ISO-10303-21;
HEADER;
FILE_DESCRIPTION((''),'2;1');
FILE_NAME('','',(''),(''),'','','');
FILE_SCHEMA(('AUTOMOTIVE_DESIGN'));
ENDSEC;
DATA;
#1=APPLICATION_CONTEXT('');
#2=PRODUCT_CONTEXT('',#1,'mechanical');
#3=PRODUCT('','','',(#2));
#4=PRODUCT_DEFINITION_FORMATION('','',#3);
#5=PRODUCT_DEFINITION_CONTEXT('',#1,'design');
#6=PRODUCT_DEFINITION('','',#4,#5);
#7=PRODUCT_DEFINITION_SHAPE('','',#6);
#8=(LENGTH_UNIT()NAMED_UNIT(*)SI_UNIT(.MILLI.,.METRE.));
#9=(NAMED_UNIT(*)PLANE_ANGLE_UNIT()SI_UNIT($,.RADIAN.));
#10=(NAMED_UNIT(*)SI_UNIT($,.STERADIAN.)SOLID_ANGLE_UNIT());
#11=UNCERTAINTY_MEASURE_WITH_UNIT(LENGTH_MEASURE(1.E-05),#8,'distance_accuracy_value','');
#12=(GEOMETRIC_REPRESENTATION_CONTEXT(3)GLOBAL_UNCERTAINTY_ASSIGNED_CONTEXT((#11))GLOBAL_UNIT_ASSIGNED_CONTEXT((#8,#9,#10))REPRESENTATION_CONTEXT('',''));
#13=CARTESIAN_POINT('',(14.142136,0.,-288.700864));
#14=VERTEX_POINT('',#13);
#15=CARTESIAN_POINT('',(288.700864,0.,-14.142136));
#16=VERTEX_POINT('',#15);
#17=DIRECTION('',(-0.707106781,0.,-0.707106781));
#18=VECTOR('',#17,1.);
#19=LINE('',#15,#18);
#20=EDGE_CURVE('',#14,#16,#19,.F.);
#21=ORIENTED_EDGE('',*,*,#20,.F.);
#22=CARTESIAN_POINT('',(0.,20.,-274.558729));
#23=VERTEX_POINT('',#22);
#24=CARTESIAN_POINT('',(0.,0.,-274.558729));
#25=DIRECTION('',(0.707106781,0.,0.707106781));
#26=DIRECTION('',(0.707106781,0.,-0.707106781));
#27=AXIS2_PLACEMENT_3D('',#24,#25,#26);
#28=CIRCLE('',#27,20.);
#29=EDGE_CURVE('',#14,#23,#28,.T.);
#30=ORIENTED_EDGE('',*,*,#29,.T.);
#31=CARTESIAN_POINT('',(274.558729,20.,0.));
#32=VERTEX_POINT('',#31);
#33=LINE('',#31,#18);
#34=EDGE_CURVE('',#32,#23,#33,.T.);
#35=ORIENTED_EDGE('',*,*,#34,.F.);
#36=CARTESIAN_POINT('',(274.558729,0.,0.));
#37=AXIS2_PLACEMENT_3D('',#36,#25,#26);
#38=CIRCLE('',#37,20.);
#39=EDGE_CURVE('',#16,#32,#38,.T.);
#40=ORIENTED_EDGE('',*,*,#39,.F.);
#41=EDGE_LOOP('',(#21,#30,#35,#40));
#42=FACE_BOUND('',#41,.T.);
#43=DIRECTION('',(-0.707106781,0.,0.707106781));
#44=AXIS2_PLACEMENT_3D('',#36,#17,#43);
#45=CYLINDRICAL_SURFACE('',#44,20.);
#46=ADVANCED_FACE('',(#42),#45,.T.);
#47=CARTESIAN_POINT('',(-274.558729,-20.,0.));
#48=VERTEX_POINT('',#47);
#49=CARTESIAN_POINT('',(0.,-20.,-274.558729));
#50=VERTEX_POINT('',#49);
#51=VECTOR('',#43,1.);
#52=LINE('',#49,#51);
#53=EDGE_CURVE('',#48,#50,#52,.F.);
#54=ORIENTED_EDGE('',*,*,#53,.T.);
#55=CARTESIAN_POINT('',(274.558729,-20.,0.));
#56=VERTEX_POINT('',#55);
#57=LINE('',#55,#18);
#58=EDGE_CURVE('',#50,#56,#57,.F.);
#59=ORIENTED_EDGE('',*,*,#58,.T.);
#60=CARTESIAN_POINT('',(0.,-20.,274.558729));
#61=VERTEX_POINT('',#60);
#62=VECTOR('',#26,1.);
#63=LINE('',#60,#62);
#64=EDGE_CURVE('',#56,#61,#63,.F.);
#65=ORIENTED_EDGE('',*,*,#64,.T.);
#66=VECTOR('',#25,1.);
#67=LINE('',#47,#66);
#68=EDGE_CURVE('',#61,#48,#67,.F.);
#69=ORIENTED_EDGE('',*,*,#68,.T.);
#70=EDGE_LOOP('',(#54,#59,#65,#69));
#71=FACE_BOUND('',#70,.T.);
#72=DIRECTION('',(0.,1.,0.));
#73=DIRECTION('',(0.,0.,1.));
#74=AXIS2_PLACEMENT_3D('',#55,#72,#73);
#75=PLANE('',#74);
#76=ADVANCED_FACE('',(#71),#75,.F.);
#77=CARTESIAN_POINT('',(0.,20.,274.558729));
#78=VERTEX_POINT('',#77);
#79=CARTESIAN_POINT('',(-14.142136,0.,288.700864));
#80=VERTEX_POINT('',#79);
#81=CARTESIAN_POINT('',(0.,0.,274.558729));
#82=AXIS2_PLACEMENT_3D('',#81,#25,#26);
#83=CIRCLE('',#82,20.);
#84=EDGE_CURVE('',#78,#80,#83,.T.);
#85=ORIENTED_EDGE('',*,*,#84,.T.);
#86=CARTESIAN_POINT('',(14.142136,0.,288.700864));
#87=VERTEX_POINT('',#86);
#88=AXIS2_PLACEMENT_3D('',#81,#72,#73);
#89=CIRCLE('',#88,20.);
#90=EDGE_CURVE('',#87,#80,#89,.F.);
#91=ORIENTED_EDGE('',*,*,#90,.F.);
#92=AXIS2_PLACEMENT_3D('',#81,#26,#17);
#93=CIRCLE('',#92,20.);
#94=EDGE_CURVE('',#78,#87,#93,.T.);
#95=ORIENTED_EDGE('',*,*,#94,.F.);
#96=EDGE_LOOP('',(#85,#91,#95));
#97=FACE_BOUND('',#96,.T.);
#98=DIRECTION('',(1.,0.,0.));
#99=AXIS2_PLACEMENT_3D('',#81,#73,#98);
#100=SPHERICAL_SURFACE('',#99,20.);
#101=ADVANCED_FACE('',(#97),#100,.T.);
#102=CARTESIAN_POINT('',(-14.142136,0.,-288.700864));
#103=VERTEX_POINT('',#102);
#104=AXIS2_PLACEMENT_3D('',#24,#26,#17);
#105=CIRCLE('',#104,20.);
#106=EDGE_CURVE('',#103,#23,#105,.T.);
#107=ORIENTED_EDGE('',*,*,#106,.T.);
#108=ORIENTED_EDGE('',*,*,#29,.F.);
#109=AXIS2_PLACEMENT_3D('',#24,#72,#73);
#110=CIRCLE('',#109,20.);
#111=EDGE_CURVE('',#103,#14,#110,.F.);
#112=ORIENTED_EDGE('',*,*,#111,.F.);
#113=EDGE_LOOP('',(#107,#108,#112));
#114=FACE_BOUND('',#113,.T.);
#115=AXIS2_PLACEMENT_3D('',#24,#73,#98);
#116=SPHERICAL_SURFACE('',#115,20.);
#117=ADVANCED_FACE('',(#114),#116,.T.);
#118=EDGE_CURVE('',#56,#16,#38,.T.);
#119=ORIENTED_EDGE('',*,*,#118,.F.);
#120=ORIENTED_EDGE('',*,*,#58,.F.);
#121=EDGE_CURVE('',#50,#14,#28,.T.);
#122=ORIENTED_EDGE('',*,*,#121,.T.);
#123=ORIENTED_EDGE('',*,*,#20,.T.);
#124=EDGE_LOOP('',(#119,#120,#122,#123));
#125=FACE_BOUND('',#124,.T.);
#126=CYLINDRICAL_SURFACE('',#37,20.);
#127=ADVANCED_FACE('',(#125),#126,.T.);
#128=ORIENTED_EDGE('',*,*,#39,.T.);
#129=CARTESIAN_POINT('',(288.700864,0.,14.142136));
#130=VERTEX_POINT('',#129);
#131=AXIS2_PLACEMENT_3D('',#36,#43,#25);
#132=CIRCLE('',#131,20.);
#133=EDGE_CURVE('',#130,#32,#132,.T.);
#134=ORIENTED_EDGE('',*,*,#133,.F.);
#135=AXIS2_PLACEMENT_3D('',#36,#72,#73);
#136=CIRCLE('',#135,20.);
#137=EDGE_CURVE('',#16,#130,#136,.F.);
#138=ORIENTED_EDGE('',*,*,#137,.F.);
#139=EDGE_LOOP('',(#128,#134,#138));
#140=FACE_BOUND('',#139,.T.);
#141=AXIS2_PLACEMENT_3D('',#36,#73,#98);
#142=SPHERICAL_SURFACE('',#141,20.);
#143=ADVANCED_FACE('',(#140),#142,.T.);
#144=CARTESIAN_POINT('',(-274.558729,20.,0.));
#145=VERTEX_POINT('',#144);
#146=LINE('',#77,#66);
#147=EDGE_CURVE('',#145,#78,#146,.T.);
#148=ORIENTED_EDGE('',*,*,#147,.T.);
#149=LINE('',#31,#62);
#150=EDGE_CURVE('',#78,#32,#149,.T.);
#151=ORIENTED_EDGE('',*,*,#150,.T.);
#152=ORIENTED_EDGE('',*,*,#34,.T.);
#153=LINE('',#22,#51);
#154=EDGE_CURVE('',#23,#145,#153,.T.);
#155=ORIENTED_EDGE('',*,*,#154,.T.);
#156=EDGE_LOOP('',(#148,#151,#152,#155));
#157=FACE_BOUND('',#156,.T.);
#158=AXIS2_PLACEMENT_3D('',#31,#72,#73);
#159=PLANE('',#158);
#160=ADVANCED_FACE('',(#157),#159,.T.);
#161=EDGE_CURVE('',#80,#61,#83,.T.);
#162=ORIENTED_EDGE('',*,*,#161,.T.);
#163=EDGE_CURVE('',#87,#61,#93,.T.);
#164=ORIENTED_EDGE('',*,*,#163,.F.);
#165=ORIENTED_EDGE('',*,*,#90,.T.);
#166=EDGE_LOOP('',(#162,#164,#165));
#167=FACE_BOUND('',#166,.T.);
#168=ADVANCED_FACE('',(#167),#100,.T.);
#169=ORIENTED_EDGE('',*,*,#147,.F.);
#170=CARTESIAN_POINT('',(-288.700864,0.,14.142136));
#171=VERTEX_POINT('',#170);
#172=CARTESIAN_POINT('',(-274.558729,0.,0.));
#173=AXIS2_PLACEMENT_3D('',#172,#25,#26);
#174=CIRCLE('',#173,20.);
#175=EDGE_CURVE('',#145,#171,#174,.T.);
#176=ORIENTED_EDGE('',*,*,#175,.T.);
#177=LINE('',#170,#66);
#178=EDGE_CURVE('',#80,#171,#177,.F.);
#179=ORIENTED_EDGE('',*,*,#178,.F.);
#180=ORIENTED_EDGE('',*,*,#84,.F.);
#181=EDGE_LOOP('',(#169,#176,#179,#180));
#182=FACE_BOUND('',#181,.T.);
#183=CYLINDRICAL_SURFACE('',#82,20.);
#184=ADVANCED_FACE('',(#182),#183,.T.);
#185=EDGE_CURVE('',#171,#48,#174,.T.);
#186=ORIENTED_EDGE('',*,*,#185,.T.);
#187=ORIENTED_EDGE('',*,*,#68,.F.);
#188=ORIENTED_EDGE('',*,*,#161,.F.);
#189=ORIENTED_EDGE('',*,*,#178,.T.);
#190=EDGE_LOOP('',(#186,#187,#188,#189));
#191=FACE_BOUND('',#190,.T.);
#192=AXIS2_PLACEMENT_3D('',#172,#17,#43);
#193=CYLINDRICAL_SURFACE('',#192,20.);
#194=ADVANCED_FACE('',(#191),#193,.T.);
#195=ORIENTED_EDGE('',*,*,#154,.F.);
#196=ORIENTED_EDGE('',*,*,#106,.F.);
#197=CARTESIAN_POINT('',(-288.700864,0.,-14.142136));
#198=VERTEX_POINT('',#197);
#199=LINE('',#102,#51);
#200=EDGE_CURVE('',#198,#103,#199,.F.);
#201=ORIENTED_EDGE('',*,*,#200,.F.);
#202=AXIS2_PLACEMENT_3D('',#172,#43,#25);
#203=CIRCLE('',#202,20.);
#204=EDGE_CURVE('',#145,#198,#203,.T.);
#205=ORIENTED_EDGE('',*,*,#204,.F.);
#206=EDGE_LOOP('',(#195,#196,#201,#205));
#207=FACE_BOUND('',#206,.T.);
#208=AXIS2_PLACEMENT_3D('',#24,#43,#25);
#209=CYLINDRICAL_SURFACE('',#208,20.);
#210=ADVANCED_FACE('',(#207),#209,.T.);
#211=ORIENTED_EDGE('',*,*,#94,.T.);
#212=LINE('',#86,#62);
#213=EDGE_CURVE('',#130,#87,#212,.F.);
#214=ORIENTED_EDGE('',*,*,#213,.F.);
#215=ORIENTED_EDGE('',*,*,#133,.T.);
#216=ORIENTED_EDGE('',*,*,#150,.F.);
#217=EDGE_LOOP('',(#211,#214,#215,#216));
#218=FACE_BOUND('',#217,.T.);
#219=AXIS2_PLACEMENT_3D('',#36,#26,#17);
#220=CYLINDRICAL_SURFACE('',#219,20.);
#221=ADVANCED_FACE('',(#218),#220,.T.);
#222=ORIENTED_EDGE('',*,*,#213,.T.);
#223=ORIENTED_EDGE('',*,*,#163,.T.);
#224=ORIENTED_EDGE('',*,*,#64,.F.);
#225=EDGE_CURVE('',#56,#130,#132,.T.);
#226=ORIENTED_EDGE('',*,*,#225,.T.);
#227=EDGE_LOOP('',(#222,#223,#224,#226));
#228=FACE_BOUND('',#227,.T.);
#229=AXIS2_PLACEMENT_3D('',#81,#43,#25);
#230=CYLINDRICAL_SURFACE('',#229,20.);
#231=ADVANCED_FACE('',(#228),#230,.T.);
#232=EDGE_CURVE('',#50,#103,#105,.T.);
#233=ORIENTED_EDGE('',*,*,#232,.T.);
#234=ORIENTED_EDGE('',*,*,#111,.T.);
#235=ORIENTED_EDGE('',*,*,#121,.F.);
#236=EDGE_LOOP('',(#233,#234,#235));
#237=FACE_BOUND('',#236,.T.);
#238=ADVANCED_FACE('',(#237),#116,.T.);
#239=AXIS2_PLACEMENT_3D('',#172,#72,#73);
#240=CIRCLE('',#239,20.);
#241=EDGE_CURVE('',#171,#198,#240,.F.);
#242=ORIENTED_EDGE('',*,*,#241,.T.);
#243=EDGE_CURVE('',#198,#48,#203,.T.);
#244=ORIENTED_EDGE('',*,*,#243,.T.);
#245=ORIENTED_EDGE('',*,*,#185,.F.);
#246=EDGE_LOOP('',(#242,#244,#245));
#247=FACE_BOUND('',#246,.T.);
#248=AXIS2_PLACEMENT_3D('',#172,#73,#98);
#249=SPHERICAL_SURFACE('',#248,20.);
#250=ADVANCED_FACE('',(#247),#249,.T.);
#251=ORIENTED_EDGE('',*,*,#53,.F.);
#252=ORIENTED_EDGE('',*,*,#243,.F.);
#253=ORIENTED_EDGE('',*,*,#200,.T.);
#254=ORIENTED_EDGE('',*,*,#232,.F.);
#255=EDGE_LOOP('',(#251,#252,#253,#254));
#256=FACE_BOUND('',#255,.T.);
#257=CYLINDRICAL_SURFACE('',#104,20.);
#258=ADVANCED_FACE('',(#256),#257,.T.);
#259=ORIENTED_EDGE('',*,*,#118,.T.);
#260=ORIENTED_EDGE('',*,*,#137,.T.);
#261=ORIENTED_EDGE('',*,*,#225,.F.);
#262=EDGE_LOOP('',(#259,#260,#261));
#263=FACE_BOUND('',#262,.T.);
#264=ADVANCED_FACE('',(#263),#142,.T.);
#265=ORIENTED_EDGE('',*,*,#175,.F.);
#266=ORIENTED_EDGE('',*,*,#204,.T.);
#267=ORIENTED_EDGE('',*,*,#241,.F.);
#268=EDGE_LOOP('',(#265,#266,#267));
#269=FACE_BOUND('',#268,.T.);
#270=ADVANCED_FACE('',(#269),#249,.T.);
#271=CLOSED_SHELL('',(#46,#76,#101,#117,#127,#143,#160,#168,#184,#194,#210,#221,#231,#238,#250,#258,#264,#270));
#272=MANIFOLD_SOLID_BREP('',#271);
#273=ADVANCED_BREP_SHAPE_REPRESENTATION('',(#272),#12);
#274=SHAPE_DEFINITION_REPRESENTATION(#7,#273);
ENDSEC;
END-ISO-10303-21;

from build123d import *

# Parameters (mm, degrees)
BOSS_EXTRUDE1_DEPTH      = 20
BOSS_EXTRUDE1_DEPTH_BACK = 20
FILLET1_R                = 20


with BuildPart() as part:
    # Sketch1 → Boss-Extrude1 (new, two sides: drawn at the far end of the back side and taken through both)
    with BuildSketch(Plane(origin=(0, 0, 0), x_dir=(1, 0, 0), z_dir=(0, 1, 0)).offset(-BOSS_EXTRUDE1_DEPTH_BACK)):
        with BuildLine():
            Line((-14.142135624, 288.700864376), (-288.700864376, 14.142135624))
            ThreePointArc((-288.700864376, 14.142135624), (-294.558728753, 0), (-288.700864376, -14.142135624))
            Line((-288.700864376, -14.142135624), (-14.142135624, -288.700864376))
            ThreePointArc((-14.142135624, -288.700864376), (0, -294.558728753), (14.142135624, -288.700864376))
            Line((14.142135624, -288.700864376), (288.700864376, -14.142135624))
            ThreePointArc((288.700864376, -14.142135624), (294.558728753, 0), (288.700864376, 14.142135624))
            Line((288.700864376, 14.142135624), (14.142135624, 288.700864376))
            ThreePointArc((14.142135624, 288.700864376), (0, 294.558728753), (-14.142135624, 288.700864376))
        make_face()
    extrude(amount=BOSS_EXTRUDE1_DEPTH + BOSS_EXTRUDE1_DEPTH_BACK)

    # Fillet1
    fillet1_edges = [part.edges().sort_by_distance(p)[0] for p in [
        (151.4215, -20, 151.4215),
        (0, -20, 294.558728753),
        (-151.4215, -20, 151.4215),
        (-294.558728753, -20, 0),
        (-151.4215, -20, -151.4215),
        (0, -20, -294.558728753),
        (151.4215, -20, -151.4215),
        (294.558728753, -20, 0),
        (151.4215, 20, 151.4215),
        (0, 20, 294.558728753),
        (-151.4215, 20, 151.4215),
        (-294.558728753, 20, 0),
        (-151.4215, 20, -151.4215),
        (0, 20, -294.558728753),
        (151.4215, 20, -151.4215),
        (294.558728753, 20, 0),
    ]]
    fillet(fillet1_edges, radius=FILLET1_R - 0.0001)  # a hair under: the kernel refuses the full size


solid = part.part
